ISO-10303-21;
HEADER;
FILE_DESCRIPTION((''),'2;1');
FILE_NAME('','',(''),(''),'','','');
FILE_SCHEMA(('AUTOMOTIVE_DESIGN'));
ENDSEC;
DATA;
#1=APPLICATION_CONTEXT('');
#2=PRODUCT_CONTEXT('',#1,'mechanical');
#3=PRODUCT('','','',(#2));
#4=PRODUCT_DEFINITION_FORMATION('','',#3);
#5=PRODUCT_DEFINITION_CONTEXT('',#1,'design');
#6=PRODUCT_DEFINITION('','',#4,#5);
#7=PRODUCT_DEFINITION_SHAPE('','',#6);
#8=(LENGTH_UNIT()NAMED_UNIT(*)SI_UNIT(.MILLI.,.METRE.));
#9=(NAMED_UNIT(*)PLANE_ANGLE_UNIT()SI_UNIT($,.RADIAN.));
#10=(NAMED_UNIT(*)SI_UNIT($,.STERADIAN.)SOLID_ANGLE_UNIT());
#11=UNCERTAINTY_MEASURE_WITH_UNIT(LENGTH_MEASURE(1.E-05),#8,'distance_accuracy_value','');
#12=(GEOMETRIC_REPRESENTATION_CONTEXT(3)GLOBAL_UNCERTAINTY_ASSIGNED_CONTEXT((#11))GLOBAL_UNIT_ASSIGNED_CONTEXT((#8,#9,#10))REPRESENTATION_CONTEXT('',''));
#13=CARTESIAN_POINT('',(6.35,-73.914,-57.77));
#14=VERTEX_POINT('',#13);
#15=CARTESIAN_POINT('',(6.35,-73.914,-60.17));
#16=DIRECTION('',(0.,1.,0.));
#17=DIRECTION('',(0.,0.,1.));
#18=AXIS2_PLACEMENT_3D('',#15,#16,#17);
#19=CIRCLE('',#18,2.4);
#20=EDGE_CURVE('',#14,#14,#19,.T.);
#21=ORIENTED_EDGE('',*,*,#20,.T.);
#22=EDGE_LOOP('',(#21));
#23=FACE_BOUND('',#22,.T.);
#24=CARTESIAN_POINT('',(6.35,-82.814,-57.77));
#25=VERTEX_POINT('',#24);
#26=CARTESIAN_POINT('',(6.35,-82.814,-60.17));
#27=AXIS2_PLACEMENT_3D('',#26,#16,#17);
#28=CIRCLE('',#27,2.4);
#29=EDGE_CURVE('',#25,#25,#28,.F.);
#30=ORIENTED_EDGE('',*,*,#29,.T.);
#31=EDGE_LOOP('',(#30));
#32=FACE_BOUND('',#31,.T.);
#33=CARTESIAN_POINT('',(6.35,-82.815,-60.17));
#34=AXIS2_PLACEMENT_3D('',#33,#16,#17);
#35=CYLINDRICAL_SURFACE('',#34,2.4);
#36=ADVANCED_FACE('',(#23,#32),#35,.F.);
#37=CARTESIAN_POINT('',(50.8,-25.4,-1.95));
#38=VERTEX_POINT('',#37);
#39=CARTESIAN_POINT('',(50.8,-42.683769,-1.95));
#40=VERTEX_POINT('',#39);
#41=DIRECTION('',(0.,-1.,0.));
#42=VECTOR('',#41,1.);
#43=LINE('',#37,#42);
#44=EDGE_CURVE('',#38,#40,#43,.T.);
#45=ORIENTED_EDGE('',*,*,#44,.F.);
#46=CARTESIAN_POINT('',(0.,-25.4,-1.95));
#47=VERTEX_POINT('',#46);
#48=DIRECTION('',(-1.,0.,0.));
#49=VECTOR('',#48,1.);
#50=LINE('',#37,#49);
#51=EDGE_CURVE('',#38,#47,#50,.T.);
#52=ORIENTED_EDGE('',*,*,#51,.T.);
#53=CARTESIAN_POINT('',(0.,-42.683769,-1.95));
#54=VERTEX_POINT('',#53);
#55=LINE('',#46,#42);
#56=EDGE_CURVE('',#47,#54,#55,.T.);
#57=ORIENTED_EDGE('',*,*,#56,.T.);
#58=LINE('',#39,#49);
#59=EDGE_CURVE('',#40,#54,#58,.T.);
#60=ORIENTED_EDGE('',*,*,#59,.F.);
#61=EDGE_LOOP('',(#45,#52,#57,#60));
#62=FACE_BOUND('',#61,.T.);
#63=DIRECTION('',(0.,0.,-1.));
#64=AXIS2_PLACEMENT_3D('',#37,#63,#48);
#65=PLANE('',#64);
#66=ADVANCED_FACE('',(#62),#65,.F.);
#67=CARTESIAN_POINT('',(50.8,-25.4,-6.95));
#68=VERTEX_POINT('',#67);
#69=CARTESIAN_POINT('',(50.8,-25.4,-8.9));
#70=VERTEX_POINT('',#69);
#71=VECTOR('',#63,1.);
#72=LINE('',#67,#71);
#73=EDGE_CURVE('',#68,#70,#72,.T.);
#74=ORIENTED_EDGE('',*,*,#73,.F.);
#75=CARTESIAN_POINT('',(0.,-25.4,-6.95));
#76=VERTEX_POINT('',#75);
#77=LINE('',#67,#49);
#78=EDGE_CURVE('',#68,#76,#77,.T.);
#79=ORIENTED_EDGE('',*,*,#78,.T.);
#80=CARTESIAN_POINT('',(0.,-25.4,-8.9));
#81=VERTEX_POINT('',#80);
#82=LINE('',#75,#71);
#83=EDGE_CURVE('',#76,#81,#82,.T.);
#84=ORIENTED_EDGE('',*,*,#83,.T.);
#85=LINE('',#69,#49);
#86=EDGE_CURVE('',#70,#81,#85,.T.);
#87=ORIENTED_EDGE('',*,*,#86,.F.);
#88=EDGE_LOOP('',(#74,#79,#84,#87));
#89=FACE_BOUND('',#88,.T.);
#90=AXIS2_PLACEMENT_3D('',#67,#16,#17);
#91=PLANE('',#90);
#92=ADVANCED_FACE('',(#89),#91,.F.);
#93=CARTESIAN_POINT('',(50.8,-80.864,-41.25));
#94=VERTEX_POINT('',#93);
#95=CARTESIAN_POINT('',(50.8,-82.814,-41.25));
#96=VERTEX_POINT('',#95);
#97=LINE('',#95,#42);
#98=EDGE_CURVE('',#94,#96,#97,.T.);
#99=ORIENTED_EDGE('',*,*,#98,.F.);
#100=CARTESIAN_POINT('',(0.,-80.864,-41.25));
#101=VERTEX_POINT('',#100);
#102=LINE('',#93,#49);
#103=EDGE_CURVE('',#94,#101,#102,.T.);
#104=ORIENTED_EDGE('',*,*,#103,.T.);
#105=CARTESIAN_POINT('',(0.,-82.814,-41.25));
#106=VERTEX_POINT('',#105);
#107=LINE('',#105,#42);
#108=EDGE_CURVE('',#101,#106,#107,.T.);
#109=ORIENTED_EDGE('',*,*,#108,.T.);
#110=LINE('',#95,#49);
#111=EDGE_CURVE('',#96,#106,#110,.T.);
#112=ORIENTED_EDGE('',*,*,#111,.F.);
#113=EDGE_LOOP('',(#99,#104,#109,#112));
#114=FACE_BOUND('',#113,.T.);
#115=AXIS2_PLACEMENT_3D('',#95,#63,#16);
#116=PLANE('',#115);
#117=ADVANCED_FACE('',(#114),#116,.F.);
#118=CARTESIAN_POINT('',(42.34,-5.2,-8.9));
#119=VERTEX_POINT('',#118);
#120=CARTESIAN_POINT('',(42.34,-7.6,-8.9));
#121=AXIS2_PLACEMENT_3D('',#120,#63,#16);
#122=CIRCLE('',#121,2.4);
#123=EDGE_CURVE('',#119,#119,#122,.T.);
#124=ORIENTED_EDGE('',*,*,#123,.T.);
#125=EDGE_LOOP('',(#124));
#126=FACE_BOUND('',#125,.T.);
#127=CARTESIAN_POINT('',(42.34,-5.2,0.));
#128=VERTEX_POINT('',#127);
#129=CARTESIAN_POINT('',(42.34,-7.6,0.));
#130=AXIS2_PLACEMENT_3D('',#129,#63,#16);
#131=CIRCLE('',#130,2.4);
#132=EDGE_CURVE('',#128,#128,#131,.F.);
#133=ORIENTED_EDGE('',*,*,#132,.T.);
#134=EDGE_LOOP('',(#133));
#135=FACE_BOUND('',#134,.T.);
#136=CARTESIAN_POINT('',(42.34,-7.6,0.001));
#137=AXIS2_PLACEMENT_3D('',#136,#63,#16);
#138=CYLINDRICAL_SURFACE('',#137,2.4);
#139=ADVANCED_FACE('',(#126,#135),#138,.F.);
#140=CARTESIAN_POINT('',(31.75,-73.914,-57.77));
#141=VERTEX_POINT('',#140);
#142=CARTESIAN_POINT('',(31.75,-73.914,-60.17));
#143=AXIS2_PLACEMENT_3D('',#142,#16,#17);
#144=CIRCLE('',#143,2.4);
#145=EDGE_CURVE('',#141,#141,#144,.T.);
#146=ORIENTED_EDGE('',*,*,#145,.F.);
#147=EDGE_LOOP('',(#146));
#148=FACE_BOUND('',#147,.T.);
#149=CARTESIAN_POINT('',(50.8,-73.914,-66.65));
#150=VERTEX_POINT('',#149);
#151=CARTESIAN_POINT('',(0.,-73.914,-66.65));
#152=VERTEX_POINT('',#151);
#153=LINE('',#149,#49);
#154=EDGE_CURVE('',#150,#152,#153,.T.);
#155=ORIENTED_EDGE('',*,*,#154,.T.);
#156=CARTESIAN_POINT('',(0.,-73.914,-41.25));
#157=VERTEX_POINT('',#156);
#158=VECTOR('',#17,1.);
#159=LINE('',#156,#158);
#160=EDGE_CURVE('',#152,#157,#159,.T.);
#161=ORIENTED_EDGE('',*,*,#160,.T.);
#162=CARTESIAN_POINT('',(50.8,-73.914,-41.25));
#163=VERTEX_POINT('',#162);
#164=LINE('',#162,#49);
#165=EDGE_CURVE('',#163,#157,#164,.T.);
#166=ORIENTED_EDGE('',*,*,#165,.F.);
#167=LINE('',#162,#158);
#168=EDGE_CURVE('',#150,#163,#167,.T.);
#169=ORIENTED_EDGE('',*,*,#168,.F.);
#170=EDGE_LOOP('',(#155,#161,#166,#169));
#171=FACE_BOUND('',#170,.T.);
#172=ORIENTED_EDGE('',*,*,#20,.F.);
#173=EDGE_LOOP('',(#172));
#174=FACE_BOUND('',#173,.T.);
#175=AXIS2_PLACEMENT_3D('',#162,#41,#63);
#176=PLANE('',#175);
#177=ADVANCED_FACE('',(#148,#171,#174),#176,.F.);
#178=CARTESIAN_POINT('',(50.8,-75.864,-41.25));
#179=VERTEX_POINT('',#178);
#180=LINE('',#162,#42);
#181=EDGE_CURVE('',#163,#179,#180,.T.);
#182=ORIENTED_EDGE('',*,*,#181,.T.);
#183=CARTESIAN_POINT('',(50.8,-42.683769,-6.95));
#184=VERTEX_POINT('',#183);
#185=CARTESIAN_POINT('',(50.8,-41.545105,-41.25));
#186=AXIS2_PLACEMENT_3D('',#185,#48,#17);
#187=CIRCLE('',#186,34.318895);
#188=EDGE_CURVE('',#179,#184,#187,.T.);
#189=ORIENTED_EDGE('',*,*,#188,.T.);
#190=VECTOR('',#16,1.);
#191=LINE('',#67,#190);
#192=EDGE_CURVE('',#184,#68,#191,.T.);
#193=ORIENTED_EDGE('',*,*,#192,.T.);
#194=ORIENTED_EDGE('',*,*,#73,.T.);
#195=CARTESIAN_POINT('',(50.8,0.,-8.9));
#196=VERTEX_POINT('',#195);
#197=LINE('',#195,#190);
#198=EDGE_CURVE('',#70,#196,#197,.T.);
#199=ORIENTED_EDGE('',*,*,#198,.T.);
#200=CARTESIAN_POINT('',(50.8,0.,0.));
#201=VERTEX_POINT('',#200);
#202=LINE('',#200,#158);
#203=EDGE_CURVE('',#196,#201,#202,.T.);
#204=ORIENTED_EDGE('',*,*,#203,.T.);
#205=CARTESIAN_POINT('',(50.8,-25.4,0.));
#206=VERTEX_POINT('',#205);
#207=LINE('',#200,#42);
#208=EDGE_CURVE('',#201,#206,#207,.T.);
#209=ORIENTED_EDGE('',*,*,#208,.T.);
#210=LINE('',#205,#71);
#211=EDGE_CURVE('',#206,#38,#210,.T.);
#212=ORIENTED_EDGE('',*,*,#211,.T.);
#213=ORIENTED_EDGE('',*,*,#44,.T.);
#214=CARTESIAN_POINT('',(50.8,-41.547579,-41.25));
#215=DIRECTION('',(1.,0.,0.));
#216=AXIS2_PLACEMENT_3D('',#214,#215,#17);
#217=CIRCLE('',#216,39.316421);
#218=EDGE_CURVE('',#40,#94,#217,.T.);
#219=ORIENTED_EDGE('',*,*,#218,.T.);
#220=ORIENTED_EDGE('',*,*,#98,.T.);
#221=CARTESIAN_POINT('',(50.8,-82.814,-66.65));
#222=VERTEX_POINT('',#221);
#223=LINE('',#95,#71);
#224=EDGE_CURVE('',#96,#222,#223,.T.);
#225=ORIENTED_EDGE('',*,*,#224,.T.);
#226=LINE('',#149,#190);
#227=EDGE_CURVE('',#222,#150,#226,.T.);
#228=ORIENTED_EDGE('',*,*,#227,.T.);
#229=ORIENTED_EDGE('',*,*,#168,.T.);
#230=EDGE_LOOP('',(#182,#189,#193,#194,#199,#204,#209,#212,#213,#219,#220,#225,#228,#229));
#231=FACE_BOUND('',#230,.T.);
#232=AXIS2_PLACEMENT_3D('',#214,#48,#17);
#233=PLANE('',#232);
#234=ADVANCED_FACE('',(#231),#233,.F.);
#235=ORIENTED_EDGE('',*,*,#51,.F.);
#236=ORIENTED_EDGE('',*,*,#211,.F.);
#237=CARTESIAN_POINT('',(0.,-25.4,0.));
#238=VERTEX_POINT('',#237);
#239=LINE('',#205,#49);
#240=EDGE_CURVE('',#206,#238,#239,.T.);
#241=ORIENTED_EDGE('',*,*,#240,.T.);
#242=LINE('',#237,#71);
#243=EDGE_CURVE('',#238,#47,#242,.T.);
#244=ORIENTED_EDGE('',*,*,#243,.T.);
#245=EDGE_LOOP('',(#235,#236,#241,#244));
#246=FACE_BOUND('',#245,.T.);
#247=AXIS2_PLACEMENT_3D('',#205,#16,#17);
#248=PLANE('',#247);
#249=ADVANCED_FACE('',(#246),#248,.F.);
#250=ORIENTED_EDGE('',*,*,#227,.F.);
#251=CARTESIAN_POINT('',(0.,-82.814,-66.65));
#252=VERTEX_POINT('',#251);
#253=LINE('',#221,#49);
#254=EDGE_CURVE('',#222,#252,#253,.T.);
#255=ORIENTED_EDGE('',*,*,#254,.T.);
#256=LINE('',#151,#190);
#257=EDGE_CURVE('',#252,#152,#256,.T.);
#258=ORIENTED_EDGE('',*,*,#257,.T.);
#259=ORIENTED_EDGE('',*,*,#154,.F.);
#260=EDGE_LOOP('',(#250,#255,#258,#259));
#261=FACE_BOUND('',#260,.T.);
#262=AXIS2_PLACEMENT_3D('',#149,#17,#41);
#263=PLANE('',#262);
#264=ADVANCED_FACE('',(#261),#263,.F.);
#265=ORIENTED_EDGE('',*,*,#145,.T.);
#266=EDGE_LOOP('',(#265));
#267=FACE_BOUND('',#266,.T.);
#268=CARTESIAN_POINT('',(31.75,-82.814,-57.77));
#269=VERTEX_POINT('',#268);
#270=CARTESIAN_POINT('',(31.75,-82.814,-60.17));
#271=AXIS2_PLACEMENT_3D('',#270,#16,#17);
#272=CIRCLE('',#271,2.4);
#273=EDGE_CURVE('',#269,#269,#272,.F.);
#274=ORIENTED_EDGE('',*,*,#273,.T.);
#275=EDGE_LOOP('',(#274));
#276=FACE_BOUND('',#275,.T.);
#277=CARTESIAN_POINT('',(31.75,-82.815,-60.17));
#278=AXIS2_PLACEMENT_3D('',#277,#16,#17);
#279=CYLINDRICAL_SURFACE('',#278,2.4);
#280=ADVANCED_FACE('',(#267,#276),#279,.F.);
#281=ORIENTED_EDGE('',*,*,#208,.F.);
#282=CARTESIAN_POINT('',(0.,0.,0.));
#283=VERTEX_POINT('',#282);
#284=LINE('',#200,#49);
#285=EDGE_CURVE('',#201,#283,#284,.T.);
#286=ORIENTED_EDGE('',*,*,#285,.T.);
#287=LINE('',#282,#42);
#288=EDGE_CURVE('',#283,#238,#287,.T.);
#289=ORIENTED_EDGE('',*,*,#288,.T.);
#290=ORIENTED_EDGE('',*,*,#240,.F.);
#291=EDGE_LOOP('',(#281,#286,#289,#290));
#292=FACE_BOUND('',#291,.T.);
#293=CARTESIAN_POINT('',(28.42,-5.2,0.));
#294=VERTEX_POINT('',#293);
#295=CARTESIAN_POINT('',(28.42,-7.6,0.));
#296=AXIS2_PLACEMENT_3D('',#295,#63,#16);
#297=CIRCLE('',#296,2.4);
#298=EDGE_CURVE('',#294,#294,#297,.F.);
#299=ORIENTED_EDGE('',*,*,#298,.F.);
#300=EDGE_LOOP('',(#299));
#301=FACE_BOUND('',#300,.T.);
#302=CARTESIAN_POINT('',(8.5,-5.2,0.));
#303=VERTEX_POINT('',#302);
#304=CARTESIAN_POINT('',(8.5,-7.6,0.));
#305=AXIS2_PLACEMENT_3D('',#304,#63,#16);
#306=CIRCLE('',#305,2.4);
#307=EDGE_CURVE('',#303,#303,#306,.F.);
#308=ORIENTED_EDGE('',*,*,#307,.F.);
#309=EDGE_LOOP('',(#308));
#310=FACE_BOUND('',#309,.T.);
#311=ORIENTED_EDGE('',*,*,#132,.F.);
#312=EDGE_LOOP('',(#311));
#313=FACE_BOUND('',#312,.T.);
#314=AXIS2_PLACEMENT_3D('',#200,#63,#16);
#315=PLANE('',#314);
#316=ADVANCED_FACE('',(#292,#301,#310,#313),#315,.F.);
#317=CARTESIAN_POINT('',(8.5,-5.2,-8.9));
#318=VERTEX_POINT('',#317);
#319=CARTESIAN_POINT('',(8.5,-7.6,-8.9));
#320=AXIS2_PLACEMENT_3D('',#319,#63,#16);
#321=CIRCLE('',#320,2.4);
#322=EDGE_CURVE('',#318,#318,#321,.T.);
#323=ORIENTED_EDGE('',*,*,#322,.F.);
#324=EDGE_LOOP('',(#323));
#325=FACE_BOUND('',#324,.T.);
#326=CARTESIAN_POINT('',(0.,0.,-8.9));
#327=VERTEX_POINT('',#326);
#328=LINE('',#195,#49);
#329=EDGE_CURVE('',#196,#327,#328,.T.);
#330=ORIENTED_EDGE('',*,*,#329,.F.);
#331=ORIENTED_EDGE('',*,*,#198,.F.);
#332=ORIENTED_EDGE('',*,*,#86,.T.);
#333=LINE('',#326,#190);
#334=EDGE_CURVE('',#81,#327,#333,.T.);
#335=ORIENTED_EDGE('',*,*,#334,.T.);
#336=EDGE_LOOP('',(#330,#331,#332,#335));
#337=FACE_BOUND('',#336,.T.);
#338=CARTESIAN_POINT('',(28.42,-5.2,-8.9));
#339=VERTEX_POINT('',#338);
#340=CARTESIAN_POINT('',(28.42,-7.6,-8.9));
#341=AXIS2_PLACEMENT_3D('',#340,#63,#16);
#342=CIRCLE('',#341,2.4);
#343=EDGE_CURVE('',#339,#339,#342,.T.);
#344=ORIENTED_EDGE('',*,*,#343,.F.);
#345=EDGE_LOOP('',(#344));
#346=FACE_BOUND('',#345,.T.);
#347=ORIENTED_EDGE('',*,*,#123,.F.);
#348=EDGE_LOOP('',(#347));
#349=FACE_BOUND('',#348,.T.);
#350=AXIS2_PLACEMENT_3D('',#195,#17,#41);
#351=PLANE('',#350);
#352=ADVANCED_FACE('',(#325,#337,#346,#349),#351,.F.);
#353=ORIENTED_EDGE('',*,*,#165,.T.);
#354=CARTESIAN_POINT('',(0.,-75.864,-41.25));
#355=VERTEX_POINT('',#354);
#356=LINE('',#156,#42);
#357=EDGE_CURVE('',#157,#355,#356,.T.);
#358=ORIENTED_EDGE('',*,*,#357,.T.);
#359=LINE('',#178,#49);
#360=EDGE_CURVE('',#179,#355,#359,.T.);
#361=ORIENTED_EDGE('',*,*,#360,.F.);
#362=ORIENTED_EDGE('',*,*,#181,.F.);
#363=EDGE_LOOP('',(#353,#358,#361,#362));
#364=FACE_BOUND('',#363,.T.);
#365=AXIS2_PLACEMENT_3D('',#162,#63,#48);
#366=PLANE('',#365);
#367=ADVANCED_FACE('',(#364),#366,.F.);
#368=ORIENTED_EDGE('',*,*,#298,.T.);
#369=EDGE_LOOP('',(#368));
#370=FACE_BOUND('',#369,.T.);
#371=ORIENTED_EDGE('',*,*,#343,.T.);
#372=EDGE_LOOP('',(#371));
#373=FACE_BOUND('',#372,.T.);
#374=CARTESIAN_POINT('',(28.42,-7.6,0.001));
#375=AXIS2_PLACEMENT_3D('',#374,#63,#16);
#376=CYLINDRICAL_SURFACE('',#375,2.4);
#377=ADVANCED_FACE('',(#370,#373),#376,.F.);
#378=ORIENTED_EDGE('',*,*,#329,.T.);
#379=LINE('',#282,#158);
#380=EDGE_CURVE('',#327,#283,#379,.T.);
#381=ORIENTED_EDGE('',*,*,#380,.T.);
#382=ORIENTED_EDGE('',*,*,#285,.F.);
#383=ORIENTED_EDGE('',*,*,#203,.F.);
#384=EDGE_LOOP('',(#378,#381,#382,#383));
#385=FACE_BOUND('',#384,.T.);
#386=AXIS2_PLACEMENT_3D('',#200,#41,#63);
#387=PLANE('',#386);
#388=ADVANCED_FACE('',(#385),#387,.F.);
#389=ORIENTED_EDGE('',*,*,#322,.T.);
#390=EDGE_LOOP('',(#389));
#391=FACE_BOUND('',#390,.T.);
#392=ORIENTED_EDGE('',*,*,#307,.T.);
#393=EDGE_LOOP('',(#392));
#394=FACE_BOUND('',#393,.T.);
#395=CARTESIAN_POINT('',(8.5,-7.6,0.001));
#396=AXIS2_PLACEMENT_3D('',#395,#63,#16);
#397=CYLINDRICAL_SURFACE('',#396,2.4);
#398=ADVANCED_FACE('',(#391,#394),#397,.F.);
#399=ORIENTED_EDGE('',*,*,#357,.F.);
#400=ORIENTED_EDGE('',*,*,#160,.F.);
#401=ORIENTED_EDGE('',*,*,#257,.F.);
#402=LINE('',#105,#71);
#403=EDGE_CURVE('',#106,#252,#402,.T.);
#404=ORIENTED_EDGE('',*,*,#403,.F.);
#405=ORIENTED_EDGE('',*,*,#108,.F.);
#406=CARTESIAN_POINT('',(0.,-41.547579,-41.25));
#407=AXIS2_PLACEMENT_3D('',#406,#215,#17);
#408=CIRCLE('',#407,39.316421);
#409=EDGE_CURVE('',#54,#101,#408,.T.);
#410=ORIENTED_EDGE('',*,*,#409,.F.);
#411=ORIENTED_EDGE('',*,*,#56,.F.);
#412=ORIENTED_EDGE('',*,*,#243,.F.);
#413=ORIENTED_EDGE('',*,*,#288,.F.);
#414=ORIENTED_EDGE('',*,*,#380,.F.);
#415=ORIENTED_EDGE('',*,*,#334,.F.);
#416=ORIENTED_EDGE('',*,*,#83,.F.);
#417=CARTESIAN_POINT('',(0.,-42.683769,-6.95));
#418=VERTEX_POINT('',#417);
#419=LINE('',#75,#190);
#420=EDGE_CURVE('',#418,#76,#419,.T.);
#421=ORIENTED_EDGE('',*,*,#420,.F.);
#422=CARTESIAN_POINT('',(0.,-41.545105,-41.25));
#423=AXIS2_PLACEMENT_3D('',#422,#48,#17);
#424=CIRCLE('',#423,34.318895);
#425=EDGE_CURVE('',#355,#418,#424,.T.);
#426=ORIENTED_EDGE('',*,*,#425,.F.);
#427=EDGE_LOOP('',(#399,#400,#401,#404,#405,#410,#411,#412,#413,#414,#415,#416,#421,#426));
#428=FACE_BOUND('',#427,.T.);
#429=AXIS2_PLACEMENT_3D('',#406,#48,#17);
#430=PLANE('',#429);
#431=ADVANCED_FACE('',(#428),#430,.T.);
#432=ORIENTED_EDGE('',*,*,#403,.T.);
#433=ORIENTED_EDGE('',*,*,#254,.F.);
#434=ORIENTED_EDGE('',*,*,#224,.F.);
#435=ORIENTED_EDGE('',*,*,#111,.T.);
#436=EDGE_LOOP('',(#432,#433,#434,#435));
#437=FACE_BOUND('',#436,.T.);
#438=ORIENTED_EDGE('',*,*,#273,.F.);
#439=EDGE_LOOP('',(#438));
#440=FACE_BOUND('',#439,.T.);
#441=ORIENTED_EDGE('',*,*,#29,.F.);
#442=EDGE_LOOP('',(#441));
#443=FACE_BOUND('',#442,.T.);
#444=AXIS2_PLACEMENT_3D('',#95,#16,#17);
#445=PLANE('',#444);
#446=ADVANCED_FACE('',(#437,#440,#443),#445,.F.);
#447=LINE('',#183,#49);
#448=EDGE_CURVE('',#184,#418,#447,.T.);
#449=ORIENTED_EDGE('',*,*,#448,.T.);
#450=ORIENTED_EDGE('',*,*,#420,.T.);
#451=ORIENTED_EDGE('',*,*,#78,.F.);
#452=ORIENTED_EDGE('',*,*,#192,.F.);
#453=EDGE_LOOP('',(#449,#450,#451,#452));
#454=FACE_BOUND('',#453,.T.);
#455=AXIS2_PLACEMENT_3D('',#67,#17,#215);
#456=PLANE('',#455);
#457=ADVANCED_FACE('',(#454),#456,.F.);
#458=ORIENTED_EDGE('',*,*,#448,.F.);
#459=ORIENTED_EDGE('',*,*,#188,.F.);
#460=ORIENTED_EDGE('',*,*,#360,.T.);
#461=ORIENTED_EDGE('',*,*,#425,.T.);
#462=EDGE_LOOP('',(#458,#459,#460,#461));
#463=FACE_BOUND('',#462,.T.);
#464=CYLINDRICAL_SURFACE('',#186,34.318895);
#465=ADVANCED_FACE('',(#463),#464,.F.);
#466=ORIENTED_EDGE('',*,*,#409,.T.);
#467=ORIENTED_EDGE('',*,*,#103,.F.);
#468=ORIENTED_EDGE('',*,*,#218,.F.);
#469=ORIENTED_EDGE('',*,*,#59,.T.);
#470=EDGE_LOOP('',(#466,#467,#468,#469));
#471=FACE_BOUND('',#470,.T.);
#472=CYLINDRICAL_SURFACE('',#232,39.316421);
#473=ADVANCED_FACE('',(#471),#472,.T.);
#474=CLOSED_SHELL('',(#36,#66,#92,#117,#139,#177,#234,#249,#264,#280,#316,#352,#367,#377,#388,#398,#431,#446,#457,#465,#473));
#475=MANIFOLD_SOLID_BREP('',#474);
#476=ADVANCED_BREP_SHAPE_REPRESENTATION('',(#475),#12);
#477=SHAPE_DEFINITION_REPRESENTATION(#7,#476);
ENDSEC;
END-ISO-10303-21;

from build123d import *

# Parameters (mm, degrees)
BOSS_EXTRUDE1_DEPTH = 50.8
CUT_EXTRUDE1_REACH  = 113.741
SKETCH2_R           = 2.4
CUT_EXTRUDE2_REACH  = 115.022
SKETCH3_R           = 2.4
LPATTERN1_START     = -8.9
LPATTERN1_OUTLINE_R = 2.4
LPATTERN1_DEPTH     = 8.9


# Read off the part's stored shape, not the designer's step: LPattern1
with BuildPart() as part:
    # Sketch1 → Boss-Extrude1 (new body)
    with BuildSketch(Plane(origin=(0, 0, 0), x_dir=(0, 0, -1), z_dir=(1, 0, 0))):
        with BuildLine():
            Line((0, -25.4), (1.95, -25.4))
            Line((1.95, -25.4), (1.95, -42.683768749))
            ThreePointArc((1.95, -42.683768749), (13.853740865, -69.747329637), (41.25, -80.864))
            Line((41.25, -80.864), (41.25, -82.814))
            Line((41.25, -82.814), (66.65, -82.814))
            Line((66.65, -82.814), (66.65, -73.914))
            Line((66.65, -73.914), (41.25, -73.914))
            Line((41.25, -73.914), (41.25, -75.864))
            ThreePointArc((41.25, -75.864), (17.388850898, -66.211521802), (6.95, -42.683768749))
            Line((6.95, -42.683768749), (6.95, -25.4))
            Line((6.95, -25.4), (8.9, -25.4))
            Line((8.9, -25.4), (8.9, 0))
            Line((8.9, 0), (0, 0))
            Line((0, 0), (0, -25.4))
        make_face()
    extrude(amount=BOSS_EXTRUDE1_DEPTH)

    # Sketch2 → Cut-Extrude1 (cut, up to next)
    with BuildSketch(Plane(origin=(0, -73.914, 0), x_dir=(1, 0, 0), z_dir=(0, 1, 0)), mode=Mode.PRIVATE) as cut_extrude1_sk1:
        with Locations(Location((6.35, 60.17, 0), (0, 0, 270))):
            Circle(SKETCH2_R)
    cut_extrude1_tool1 = extrude(cut_extrude1_sk1.sketch, amount=-CUT_EXTRUDE1_REACH, mode=Mode.PRIVATE) & part.part
    # Sketch2 → Cut-Extrude1 (cut, up to next)
    with BuildSketch(Plane(origin=(0, -73.914, 0), x_dir=(1, 0, 0), z_dir=(0, 1, 0)), mode=Mode.PRIVATE) as cut_extrude1_sk2:
        with Locations(Location((31.75, 60.17, 0), (0, 0, 270))):
            Circle(SKETCH2_R)
    cut_extrude1_tool2 = extrude(cut_extrude1_sk2.sketch, amount=-CUT_EXTRUDE1_REACH, mode=Mode.PRIVATE) & part.part
    add(cut_extrude1_tool1.solids().sort_by_distance((6.35, -73.914, -60.17))[0], mode=Mode.SUBTRACT)
    add(cut_extrude1_tool2.solids().sort_by_distance((31.75, -73.914, -60.17))[0], mode=Mode.SUBTRACT)

    # Sketch3 → Cut-Extrude2 (cut, up to next)
    with BuildSketch(Plane(origin=(0, 0, -8.9), x_dir=(-1, 0, 0), z_dir=(0, 0, -1)), mode=Mode.PRIVATE) as cut_extrude2_sk1:
        with Locations(Location((-42.34, -7.6, 0), (0, 0, 90))):
            Circle(SKETCH3_R)
    cut_extrude2_tool1 = extrude(cut_extrude2_sk1.sketch, amount=-CUT_EXTRUDE2_REACH, mode=Mode.PRIVATE) & part.part
    add(cut_extrude2_tool1.solids().sort_by_distance((42.34, -7.6, -8.9))[0], mode=Mode.SUBTRACT)

    # LPattern1 outline → LPattern1 (cut)
    with BuildSketch(Plane.XY.offset(LPATTERN1_START)):
        with Locations((8.5, -7.6)):
            Circle(LPATTERN1_OUTLINE_R)
        with Locations((28.42, -7.6)):
            Circle(LPATTERN1_OUTLINE_R)
    extrude(amount=LPATTERN1_DEPTH, mode=Mode.SUBTRACT)


solid = part.part
